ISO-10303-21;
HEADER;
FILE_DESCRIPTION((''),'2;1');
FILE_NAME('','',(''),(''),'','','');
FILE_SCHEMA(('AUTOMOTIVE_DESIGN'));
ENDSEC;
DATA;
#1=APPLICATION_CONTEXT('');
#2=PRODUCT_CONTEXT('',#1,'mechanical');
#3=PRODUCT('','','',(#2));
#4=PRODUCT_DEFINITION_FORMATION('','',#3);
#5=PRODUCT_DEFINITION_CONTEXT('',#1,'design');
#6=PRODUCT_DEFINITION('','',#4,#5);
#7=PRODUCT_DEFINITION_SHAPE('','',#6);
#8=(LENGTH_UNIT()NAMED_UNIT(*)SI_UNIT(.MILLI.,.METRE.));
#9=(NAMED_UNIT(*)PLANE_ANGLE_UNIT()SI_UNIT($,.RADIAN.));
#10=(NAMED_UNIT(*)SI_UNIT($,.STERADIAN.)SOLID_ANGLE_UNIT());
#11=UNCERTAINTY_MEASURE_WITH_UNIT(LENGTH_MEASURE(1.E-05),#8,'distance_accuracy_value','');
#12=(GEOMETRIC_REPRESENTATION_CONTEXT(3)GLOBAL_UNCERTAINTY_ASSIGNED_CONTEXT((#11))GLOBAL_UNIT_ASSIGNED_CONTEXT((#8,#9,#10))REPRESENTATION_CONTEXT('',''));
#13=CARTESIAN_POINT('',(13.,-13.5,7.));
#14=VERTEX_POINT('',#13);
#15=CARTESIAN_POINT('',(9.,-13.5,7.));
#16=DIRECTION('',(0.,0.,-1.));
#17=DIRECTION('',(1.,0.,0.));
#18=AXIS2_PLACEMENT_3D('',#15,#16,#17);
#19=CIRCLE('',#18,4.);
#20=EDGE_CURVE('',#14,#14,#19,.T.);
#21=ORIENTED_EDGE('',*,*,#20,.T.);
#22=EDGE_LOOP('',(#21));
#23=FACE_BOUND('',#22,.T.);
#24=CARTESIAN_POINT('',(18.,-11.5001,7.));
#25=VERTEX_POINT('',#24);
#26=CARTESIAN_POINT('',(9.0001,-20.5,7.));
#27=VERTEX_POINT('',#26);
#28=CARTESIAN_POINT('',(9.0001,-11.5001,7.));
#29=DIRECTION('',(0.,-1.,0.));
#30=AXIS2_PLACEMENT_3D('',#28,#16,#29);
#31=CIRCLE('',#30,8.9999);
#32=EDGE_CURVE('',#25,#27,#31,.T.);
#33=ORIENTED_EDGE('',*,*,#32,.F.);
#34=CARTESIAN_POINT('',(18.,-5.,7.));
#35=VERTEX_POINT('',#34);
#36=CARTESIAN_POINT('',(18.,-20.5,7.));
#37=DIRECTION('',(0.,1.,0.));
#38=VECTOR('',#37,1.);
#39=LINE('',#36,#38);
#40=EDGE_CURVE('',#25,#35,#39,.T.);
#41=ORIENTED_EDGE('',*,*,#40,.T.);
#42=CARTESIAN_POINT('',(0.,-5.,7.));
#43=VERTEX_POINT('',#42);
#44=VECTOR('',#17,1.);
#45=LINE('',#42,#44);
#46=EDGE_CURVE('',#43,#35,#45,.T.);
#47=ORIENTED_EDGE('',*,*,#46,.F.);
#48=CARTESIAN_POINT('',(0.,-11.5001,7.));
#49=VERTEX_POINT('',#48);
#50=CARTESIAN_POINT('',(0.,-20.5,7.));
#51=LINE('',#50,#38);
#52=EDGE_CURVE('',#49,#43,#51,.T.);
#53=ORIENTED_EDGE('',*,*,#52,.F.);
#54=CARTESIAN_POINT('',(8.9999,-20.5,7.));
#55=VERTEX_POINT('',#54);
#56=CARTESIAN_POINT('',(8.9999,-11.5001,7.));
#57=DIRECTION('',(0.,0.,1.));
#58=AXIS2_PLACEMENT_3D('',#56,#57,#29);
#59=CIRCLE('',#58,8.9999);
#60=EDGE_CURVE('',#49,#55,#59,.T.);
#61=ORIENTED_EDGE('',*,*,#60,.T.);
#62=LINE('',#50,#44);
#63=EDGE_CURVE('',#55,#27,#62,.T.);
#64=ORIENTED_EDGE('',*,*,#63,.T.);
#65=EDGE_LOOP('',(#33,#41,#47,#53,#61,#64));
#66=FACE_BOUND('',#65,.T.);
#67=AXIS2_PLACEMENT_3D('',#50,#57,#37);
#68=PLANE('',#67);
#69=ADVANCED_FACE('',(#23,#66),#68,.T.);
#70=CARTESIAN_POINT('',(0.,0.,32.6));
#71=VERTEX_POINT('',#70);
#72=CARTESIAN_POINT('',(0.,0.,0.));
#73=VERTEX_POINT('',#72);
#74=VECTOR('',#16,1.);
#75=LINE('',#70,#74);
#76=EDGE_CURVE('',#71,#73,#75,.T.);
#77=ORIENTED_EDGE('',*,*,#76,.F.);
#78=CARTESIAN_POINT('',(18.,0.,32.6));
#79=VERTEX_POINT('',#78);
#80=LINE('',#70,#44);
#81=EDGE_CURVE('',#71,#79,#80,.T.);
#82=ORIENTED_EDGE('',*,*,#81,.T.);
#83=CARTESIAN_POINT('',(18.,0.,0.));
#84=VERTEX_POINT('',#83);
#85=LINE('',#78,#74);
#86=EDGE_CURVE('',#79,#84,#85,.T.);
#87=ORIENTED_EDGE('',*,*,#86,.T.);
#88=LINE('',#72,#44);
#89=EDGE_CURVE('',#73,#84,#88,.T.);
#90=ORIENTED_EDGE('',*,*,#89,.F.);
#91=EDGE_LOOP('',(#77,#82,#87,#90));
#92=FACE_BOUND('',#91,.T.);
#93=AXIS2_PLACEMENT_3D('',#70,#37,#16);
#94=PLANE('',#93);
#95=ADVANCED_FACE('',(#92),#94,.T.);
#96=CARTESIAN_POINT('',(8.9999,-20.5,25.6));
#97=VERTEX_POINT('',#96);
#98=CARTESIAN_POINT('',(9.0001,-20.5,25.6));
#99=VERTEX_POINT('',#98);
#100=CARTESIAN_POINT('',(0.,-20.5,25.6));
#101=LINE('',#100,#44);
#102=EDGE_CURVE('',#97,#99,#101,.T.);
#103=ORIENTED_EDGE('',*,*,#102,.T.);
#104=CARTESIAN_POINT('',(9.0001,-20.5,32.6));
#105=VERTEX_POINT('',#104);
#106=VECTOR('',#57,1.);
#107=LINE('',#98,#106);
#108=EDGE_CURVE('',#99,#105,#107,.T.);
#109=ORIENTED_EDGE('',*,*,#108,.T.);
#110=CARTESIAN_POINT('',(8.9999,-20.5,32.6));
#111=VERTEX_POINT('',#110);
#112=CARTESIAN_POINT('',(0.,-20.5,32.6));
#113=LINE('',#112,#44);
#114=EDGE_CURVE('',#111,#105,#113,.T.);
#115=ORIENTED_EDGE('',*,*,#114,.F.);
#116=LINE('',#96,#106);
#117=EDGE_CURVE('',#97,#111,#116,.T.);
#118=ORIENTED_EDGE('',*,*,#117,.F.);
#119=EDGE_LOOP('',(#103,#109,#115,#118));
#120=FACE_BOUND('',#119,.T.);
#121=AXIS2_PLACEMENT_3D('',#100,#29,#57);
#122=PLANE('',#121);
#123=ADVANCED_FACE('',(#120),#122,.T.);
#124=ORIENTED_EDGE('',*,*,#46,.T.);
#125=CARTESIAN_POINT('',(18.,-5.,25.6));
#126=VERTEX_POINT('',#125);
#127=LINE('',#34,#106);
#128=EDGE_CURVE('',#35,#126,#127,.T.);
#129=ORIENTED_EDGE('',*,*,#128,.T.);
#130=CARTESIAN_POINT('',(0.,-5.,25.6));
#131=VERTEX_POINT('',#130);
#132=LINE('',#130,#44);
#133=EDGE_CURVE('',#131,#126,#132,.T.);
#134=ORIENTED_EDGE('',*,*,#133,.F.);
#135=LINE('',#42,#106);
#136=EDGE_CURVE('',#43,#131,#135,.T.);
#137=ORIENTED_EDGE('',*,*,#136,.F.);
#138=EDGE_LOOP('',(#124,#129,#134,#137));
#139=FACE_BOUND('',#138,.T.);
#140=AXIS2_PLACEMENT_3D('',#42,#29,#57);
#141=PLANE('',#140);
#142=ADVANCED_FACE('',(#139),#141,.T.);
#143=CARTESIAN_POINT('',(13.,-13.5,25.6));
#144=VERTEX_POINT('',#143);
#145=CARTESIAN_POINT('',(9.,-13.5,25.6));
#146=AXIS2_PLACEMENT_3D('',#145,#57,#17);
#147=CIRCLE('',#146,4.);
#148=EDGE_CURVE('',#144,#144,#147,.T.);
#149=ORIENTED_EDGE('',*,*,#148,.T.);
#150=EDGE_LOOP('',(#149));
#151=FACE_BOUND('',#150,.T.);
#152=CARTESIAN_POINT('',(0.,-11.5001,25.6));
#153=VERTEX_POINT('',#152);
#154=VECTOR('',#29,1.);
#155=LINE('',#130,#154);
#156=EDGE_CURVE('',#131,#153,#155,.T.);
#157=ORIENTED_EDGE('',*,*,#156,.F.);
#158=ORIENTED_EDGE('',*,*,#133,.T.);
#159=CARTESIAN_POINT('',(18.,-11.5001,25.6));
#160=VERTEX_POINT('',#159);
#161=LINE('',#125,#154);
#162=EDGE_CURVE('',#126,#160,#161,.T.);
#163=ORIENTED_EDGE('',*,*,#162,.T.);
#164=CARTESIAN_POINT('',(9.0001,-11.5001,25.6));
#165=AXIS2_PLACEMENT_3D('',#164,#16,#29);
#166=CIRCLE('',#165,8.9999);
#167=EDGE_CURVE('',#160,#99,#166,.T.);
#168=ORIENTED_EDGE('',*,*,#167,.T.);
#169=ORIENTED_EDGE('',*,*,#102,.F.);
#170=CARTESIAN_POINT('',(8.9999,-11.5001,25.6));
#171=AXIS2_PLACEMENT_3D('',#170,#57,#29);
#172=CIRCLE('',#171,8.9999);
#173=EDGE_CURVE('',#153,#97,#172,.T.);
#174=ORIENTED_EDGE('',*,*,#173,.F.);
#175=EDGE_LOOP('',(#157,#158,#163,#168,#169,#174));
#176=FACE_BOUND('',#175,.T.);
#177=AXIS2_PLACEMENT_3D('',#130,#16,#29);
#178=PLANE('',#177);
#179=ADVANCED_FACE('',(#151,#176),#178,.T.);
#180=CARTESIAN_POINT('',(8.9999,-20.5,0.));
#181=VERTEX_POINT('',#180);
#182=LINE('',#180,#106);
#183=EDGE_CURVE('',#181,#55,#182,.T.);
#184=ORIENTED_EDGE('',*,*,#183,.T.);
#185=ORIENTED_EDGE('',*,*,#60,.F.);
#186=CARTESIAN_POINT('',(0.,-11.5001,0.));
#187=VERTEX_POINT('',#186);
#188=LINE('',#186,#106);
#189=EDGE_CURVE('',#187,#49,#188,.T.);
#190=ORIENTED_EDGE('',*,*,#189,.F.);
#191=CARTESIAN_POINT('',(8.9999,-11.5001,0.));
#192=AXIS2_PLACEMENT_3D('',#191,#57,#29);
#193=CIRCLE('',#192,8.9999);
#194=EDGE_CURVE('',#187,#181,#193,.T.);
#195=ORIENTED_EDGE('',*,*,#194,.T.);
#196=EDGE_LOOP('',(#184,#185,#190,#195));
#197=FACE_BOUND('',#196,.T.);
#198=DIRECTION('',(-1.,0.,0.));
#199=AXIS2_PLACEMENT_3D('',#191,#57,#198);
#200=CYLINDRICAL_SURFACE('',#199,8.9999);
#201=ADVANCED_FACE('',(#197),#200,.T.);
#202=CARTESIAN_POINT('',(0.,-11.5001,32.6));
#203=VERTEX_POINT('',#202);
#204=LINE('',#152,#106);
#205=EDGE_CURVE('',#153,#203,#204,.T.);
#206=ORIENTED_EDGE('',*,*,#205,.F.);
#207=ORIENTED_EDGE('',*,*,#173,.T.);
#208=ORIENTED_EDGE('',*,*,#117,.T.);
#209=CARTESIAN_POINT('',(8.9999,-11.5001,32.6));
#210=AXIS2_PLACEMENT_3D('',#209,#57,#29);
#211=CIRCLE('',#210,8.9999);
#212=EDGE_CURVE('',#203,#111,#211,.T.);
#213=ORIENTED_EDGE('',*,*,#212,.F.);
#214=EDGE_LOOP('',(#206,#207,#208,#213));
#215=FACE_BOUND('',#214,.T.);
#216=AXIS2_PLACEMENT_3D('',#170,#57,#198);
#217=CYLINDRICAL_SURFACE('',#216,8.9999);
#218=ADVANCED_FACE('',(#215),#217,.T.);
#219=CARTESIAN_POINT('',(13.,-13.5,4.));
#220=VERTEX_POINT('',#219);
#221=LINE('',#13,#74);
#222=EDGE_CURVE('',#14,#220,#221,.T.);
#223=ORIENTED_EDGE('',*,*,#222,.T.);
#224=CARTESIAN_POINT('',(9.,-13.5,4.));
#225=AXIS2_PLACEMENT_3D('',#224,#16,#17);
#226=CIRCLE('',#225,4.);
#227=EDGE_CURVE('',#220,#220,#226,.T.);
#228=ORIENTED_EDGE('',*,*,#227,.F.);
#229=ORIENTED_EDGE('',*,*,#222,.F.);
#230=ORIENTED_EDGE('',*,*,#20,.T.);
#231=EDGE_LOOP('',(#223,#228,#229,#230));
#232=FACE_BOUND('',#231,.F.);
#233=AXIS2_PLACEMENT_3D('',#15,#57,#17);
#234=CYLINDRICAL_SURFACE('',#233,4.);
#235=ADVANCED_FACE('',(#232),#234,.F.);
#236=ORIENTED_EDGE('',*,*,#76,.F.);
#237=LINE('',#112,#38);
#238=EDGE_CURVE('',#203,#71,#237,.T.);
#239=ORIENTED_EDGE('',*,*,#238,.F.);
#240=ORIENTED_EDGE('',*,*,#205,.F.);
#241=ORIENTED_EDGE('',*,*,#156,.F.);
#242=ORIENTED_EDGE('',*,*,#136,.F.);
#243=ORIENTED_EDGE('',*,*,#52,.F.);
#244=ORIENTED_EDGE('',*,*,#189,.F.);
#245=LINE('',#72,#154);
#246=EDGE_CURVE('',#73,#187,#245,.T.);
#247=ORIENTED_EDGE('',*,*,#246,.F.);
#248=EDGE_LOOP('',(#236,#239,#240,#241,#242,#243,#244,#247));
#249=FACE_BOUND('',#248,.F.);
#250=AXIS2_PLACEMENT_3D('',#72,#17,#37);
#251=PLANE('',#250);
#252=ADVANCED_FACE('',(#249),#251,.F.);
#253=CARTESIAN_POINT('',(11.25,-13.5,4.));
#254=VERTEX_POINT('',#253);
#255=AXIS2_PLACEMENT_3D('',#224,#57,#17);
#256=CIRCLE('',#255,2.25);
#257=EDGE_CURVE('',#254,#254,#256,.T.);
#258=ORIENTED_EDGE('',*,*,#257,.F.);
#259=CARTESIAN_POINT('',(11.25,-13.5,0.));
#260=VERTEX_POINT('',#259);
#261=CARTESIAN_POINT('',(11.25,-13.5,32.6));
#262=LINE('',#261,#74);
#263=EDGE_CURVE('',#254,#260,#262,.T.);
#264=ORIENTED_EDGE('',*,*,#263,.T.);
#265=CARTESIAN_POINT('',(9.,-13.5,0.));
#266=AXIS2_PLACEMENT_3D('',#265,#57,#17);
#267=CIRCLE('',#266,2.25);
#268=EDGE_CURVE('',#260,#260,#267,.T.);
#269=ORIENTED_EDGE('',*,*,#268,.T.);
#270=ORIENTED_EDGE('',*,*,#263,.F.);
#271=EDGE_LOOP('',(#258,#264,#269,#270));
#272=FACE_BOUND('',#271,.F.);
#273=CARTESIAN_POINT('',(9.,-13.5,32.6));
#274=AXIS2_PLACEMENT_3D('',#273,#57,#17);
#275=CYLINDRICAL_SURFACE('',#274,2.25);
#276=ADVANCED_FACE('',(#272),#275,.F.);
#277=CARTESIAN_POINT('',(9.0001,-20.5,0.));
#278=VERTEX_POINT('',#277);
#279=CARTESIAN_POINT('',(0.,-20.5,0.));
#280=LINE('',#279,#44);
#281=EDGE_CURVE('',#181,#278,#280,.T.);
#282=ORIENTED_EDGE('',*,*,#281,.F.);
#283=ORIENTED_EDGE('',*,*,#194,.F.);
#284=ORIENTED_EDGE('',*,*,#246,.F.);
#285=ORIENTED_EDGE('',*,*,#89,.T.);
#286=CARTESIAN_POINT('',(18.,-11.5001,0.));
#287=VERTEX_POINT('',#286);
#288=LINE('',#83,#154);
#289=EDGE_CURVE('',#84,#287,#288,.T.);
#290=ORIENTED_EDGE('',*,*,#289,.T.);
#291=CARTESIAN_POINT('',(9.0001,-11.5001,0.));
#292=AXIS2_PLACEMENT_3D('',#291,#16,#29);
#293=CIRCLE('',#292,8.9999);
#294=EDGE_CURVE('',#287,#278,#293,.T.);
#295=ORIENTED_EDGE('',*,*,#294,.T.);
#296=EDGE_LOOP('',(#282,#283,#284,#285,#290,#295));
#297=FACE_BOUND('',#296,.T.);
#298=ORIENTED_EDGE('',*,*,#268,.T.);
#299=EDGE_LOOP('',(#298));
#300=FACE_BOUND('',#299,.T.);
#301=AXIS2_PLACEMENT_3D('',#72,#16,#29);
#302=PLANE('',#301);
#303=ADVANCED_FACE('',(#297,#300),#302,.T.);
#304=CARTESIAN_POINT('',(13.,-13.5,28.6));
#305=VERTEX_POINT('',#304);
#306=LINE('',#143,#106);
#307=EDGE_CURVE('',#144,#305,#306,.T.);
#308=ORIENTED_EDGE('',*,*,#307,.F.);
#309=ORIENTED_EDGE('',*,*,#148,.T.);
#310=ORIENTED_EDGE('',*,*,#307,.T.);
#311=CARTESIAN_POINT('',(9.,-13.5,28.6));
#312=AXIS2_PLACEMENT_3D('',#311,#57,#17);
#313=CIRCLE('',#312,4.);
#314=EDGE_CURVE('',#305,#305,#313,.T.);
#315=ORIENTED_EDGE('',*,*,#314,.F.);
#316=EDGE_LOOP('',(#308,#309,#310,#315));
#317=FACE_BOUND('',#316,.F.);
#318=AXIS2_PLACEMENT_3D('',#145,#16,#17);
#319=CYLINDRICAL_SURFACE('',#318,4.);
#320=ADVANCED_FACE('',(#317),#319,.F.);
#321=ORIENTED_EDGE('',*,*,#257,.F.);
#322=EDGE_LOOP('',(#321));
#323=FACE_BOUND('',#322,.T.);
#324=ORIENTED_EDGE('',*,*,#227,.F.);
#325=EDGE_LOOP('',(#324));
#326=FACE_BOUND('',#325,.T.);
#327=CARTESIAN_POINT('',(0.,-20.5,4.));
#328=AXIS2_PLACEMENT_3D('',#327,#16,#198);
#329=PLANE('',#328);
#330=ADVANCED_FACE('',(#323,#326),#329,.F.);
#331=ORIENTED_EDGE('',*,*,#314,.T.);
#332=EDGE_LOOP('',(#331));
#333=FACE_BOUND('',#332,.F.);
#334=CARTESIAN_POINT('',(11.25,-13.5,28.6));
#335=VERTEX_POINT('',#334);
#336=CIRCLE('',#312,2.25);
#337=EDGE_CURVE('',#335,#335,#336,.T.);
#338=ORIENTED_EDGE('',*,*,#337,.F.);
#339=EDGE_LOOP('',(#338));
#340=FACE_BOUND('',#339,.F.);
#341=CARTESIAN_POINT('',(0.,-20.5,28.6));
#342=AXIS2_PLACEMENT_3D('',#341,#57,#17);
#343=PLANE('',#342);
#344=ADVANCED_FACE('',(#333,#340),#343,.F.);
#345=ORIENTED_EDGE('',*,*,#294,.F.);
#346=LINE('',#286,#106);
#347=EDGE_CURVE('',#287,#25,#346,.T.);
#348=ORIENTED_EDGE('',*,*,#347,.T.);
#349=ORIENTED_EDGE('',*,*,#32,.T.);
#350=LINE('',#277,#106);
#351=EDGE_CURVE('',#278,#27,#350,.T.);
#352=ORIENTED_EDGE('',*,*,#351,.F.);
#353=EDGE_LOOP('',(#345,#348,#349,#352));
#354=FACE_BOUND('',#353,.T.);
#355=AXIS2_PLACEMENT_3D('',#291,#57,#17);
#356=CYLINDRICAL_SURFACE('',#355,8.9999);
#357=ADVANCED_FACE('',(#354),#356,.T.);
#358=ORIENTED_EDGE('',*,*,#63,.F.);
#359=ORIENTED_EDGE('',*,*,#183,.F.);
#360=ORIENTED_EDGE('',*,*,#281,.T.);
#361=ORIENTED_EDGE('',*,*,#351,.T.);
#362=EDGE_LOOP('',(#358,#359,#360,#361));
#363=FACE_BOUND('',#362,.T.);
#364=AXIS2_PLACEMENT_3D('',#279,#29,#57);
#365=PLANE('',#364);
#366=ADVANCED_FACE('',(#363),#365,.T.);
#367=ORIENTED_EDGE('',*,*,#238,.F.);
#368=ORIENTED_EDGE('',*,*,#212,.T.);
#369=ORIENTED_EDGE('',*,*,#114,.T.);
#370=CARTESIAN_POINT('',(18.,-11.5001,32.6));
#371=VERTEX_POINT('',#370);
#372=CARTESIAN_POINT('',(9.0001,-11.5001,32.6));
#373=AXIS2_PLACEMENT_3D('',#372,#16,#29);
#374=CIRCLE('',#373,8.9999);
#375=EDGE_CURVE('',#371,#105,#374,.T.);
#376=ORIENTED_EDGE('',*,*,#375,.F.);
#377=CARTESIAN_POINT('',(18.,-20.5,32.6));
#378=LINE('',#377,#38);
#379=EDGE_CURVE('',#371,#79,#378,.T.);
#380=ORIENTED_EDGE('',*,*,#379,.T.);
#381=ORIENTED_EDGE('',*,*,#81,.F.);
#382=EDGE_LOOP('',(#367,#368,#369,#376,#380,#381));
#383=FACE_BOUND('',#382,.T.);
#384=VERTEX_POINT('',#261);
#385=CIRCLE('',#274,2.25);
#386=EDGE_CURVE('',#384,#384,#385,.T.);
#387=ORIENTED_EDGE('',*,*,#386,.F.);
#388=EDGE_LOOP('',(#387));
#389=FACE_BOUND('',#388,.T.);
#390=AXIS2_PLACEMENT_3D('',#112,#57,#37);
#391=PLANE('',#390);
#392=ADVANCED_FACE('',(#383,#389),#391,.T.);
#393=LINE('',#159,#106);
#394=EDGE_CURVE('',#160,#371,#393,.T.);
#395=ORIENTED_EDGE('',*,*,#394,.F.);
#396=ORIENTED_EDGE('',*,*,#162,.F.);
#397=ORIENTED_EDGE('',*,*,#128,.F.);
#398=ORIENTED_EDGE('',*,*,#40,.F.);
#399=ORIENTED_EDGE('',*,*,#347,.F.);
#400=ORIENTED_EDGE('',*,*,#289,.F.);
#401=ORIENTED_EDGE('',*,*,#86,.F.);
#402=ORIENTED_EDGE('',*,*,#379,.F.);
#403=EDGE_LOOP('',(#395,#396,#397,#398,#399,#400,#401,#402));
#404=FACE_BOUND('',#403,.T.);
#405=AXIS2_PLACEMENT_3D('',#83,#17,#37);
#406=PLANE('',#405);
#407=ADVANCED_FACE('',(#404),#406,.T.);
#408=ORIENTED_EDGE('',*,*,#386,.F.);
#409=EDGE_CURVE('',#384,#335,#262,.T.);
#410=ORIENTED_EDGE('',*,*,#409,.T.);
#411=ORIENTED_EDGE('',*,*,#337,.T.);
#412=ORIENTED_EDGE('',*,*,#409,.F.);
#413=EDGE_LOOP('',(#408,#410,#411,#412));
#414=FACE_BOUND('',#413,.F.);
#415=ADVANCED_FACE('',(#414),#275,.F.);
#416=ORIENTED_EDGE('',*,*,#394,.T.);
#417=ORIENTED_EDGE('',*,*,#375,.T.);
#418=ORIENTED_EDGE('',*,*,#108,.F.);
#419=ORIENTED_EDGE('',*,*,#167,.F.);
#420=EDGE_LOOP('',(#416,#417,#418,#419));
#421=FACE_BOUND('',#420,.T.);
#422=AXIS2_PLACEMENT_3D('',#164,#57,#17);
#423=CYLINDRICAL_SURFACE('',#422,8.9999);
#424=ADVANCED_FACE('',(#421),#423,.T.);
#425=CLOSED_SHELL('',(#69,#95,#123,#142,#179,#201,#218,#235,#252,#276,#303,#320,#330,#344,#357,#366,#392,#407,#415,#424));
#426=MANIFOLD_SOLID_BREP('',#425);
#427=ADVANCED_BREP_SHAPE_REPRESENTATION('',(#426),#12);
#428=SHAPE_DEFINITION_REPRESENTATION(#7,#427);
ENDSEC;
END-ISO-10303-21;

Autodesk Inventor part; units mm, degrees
ref_plane "YZ Plane" through (0, 0, 0) normal (1, 0, 0) x (0, 1, 0)
ref_plane "XZ Plane" through (0, 0, 0) normal (0, 1, 0) x (-1, 0, 0)
sketch "Эскиз2" plane through (0, 0, 0) normal (1, 0, 0) x (0, 1, 0)
  line L0 (0, 0) -> (-20.5, 0)
  line L1 (-20.5, 0) -> (-20.5, 32.6)
  line L2 (-20.5, 32.6) -> (0, 32.6)
  line L3 (0, 32.6) -> (0, 0)
  line L4 (-20.5, 0) -> (-20.5, 7)
  line L5 (-20.5, 7) -> (-5, 7)
  line L6 (-5, 7) -> (-5, 25.6)
  line L7 (-5, 25.6) -> (-20.5, 25.6)
  line L8 (-20.5, 25.6) -> (-20.5, 7)
  point P0 (0, 3)
  dimension "d0" = 20.5
  dimension "d1" = 32.6
  dimension "d2" = 7
  dimension "d3" = 15.5
  dimension "d4" = 18.6
extrude "Выдавливание1" add sketch "Эскиз2" along normal blind 18 contours L0 L1 L5 L6 L7 L2 L3
sketch "Эскиз4" plane through (0, -20.5, 32.6) normal (0, 0, 1) x (1, 0, 0)
  line L0 (0, 0) -> (18, 0) projected
  line L1 (9, 0) -> (9, 7)
  circle A0 centre (9, 7) radius 4
  point P0 (0, 20.5)
  dimension "d7" = 7
  dimension "d8" = 8
extrude "Выдавливание2" cut sketch "Эскиз4" along normal blind 3 from surface at -7
ref_plane "РабПлоскость1" through (18, -5, 16.3) normal (0, 0, -1) x (-1, 0, 0)
mirror "Зеркальное отражение1" about plane through (18, -5, 16.3) normal (0, 0, -1) of "Выдавливание2"
sketch "Эскиз6" plane through (0, -20.5, 32.6) normal (0, 0, 1) x (1, 0, 0)
  circle A0 centre (9, 7) radius 4 projected
  circle A1 centre (9, 7) radius 2.25
  point P0 (0, 20.5)
  dimension "d11" = 4.5
extrude "Выдавливание3" cut sketch "Эскиз6" against normal through all contours A1
fillet "Сопряжение1" radius 9 4 edges at (18, -20.5, 29.1) (0, -20.5, 29.1) (18, -20.5, 3.5) (0, -20.5, 3.5)
equation "\"d2\" = -0.5 * d4 + 0.5 * d1"
properties part number "Крепление кулака"
